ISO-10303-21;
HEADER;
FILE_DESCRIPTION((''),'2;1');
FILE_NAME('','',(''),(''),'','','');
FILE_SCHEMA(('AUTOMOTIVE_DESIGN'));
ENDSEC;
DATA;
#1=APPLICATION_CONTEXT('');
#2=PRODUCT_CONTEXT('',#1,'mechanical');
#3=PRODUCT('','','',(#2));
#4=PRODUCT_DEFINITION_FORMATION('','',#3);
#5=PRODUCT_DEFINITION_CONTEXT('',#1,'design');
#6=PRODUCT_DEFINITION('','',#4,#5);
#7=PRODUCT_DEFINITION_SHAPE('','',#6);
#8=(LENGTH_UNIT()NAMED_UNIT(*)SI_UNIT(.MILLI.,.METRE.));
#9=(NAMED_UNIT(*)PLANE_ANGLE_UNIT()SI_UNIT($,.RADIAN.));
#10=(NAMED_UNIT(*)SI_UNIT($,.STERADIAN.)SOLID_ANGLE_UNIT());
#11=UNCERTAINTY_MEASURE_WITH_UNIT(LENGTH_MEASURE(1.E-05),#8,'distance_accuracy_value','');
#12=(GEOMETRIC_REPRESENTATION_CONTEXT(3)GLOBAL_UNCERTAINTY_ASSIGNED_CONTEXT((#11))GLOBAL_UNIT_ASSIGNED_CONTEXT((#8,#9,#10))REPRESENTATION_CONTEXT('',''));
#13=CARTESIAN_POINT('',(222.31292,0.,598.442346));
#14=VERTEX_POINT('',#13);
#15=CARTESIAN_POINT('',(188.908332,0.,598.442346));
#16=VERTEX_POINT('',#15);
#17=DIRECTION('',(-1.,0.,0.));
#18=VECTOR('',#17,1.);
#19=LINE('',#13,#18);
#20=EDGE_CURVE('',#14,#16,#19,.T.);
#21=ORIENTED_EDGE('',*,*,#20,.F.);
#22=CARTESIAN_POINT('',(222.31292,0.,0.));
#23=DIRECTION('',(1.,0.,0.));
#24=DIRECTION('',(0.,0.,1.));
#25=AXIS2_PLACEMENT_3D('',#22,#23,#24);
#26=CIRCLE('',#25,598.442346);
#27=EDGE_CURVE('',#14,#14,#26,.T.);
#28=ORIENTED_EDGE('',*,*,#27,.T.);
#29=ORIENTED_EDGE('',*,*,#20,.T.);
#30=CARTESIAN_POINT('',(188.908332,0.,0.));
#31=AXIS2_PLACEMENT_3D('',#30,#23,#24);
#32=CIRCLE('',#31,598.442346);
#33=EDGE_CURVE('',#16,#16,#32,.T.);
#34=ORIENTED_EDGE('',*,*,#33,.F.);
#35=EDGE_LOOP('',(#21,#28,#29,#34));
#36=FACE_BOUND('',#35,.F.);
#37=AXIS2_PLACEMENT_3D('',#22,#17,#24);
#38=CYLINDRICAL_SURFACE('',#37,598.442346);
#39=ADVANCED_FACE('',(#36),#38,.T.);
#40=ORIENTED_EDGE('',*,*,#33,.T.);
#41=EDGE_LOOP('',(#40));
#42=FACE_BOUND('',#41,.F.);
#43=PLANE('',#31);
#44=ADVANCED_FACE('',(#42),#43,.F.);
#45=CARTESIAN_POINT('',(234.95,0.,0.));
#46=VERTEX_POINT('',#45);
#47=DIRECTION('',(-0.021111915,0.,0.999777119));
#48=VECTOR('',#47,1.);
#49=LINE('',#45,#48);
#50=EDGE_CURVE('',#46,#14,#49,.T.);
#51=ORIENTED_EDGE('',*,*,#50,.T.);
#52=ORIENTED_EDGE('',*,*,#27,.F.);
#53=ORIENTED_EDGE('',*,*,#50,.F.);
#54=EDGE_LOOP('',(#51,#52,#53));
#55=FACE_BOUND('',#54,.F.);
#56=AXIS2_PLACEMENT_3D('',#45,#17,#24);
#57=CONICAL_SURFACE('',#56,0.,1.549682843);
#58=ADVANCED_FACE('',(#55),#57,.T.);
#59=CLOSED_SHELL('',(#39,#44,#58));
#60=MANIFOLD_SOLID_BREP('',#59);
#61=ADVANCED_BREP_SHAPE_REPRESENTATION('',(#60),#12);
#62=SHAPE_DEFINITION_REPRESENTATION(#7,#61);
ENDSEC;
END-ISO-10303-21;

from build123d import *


# Not quite as in the source:
# - a feature names something its author has since deleted; it is built from what else it names


with BuildPart() as f1:
    # F0 (on Front) → F1 (revolve)
    with BuildSketch(Plane.XZ):
        Polygon((222.3129196464, 598.4423458588), (188.9083323345, 598.4423458588), (188.9083323345, 0), (234.95, 0), align=None)
    revolve(axis=Axis((0, 0, 0), (1, 0, 0)))


solid = f1.part
